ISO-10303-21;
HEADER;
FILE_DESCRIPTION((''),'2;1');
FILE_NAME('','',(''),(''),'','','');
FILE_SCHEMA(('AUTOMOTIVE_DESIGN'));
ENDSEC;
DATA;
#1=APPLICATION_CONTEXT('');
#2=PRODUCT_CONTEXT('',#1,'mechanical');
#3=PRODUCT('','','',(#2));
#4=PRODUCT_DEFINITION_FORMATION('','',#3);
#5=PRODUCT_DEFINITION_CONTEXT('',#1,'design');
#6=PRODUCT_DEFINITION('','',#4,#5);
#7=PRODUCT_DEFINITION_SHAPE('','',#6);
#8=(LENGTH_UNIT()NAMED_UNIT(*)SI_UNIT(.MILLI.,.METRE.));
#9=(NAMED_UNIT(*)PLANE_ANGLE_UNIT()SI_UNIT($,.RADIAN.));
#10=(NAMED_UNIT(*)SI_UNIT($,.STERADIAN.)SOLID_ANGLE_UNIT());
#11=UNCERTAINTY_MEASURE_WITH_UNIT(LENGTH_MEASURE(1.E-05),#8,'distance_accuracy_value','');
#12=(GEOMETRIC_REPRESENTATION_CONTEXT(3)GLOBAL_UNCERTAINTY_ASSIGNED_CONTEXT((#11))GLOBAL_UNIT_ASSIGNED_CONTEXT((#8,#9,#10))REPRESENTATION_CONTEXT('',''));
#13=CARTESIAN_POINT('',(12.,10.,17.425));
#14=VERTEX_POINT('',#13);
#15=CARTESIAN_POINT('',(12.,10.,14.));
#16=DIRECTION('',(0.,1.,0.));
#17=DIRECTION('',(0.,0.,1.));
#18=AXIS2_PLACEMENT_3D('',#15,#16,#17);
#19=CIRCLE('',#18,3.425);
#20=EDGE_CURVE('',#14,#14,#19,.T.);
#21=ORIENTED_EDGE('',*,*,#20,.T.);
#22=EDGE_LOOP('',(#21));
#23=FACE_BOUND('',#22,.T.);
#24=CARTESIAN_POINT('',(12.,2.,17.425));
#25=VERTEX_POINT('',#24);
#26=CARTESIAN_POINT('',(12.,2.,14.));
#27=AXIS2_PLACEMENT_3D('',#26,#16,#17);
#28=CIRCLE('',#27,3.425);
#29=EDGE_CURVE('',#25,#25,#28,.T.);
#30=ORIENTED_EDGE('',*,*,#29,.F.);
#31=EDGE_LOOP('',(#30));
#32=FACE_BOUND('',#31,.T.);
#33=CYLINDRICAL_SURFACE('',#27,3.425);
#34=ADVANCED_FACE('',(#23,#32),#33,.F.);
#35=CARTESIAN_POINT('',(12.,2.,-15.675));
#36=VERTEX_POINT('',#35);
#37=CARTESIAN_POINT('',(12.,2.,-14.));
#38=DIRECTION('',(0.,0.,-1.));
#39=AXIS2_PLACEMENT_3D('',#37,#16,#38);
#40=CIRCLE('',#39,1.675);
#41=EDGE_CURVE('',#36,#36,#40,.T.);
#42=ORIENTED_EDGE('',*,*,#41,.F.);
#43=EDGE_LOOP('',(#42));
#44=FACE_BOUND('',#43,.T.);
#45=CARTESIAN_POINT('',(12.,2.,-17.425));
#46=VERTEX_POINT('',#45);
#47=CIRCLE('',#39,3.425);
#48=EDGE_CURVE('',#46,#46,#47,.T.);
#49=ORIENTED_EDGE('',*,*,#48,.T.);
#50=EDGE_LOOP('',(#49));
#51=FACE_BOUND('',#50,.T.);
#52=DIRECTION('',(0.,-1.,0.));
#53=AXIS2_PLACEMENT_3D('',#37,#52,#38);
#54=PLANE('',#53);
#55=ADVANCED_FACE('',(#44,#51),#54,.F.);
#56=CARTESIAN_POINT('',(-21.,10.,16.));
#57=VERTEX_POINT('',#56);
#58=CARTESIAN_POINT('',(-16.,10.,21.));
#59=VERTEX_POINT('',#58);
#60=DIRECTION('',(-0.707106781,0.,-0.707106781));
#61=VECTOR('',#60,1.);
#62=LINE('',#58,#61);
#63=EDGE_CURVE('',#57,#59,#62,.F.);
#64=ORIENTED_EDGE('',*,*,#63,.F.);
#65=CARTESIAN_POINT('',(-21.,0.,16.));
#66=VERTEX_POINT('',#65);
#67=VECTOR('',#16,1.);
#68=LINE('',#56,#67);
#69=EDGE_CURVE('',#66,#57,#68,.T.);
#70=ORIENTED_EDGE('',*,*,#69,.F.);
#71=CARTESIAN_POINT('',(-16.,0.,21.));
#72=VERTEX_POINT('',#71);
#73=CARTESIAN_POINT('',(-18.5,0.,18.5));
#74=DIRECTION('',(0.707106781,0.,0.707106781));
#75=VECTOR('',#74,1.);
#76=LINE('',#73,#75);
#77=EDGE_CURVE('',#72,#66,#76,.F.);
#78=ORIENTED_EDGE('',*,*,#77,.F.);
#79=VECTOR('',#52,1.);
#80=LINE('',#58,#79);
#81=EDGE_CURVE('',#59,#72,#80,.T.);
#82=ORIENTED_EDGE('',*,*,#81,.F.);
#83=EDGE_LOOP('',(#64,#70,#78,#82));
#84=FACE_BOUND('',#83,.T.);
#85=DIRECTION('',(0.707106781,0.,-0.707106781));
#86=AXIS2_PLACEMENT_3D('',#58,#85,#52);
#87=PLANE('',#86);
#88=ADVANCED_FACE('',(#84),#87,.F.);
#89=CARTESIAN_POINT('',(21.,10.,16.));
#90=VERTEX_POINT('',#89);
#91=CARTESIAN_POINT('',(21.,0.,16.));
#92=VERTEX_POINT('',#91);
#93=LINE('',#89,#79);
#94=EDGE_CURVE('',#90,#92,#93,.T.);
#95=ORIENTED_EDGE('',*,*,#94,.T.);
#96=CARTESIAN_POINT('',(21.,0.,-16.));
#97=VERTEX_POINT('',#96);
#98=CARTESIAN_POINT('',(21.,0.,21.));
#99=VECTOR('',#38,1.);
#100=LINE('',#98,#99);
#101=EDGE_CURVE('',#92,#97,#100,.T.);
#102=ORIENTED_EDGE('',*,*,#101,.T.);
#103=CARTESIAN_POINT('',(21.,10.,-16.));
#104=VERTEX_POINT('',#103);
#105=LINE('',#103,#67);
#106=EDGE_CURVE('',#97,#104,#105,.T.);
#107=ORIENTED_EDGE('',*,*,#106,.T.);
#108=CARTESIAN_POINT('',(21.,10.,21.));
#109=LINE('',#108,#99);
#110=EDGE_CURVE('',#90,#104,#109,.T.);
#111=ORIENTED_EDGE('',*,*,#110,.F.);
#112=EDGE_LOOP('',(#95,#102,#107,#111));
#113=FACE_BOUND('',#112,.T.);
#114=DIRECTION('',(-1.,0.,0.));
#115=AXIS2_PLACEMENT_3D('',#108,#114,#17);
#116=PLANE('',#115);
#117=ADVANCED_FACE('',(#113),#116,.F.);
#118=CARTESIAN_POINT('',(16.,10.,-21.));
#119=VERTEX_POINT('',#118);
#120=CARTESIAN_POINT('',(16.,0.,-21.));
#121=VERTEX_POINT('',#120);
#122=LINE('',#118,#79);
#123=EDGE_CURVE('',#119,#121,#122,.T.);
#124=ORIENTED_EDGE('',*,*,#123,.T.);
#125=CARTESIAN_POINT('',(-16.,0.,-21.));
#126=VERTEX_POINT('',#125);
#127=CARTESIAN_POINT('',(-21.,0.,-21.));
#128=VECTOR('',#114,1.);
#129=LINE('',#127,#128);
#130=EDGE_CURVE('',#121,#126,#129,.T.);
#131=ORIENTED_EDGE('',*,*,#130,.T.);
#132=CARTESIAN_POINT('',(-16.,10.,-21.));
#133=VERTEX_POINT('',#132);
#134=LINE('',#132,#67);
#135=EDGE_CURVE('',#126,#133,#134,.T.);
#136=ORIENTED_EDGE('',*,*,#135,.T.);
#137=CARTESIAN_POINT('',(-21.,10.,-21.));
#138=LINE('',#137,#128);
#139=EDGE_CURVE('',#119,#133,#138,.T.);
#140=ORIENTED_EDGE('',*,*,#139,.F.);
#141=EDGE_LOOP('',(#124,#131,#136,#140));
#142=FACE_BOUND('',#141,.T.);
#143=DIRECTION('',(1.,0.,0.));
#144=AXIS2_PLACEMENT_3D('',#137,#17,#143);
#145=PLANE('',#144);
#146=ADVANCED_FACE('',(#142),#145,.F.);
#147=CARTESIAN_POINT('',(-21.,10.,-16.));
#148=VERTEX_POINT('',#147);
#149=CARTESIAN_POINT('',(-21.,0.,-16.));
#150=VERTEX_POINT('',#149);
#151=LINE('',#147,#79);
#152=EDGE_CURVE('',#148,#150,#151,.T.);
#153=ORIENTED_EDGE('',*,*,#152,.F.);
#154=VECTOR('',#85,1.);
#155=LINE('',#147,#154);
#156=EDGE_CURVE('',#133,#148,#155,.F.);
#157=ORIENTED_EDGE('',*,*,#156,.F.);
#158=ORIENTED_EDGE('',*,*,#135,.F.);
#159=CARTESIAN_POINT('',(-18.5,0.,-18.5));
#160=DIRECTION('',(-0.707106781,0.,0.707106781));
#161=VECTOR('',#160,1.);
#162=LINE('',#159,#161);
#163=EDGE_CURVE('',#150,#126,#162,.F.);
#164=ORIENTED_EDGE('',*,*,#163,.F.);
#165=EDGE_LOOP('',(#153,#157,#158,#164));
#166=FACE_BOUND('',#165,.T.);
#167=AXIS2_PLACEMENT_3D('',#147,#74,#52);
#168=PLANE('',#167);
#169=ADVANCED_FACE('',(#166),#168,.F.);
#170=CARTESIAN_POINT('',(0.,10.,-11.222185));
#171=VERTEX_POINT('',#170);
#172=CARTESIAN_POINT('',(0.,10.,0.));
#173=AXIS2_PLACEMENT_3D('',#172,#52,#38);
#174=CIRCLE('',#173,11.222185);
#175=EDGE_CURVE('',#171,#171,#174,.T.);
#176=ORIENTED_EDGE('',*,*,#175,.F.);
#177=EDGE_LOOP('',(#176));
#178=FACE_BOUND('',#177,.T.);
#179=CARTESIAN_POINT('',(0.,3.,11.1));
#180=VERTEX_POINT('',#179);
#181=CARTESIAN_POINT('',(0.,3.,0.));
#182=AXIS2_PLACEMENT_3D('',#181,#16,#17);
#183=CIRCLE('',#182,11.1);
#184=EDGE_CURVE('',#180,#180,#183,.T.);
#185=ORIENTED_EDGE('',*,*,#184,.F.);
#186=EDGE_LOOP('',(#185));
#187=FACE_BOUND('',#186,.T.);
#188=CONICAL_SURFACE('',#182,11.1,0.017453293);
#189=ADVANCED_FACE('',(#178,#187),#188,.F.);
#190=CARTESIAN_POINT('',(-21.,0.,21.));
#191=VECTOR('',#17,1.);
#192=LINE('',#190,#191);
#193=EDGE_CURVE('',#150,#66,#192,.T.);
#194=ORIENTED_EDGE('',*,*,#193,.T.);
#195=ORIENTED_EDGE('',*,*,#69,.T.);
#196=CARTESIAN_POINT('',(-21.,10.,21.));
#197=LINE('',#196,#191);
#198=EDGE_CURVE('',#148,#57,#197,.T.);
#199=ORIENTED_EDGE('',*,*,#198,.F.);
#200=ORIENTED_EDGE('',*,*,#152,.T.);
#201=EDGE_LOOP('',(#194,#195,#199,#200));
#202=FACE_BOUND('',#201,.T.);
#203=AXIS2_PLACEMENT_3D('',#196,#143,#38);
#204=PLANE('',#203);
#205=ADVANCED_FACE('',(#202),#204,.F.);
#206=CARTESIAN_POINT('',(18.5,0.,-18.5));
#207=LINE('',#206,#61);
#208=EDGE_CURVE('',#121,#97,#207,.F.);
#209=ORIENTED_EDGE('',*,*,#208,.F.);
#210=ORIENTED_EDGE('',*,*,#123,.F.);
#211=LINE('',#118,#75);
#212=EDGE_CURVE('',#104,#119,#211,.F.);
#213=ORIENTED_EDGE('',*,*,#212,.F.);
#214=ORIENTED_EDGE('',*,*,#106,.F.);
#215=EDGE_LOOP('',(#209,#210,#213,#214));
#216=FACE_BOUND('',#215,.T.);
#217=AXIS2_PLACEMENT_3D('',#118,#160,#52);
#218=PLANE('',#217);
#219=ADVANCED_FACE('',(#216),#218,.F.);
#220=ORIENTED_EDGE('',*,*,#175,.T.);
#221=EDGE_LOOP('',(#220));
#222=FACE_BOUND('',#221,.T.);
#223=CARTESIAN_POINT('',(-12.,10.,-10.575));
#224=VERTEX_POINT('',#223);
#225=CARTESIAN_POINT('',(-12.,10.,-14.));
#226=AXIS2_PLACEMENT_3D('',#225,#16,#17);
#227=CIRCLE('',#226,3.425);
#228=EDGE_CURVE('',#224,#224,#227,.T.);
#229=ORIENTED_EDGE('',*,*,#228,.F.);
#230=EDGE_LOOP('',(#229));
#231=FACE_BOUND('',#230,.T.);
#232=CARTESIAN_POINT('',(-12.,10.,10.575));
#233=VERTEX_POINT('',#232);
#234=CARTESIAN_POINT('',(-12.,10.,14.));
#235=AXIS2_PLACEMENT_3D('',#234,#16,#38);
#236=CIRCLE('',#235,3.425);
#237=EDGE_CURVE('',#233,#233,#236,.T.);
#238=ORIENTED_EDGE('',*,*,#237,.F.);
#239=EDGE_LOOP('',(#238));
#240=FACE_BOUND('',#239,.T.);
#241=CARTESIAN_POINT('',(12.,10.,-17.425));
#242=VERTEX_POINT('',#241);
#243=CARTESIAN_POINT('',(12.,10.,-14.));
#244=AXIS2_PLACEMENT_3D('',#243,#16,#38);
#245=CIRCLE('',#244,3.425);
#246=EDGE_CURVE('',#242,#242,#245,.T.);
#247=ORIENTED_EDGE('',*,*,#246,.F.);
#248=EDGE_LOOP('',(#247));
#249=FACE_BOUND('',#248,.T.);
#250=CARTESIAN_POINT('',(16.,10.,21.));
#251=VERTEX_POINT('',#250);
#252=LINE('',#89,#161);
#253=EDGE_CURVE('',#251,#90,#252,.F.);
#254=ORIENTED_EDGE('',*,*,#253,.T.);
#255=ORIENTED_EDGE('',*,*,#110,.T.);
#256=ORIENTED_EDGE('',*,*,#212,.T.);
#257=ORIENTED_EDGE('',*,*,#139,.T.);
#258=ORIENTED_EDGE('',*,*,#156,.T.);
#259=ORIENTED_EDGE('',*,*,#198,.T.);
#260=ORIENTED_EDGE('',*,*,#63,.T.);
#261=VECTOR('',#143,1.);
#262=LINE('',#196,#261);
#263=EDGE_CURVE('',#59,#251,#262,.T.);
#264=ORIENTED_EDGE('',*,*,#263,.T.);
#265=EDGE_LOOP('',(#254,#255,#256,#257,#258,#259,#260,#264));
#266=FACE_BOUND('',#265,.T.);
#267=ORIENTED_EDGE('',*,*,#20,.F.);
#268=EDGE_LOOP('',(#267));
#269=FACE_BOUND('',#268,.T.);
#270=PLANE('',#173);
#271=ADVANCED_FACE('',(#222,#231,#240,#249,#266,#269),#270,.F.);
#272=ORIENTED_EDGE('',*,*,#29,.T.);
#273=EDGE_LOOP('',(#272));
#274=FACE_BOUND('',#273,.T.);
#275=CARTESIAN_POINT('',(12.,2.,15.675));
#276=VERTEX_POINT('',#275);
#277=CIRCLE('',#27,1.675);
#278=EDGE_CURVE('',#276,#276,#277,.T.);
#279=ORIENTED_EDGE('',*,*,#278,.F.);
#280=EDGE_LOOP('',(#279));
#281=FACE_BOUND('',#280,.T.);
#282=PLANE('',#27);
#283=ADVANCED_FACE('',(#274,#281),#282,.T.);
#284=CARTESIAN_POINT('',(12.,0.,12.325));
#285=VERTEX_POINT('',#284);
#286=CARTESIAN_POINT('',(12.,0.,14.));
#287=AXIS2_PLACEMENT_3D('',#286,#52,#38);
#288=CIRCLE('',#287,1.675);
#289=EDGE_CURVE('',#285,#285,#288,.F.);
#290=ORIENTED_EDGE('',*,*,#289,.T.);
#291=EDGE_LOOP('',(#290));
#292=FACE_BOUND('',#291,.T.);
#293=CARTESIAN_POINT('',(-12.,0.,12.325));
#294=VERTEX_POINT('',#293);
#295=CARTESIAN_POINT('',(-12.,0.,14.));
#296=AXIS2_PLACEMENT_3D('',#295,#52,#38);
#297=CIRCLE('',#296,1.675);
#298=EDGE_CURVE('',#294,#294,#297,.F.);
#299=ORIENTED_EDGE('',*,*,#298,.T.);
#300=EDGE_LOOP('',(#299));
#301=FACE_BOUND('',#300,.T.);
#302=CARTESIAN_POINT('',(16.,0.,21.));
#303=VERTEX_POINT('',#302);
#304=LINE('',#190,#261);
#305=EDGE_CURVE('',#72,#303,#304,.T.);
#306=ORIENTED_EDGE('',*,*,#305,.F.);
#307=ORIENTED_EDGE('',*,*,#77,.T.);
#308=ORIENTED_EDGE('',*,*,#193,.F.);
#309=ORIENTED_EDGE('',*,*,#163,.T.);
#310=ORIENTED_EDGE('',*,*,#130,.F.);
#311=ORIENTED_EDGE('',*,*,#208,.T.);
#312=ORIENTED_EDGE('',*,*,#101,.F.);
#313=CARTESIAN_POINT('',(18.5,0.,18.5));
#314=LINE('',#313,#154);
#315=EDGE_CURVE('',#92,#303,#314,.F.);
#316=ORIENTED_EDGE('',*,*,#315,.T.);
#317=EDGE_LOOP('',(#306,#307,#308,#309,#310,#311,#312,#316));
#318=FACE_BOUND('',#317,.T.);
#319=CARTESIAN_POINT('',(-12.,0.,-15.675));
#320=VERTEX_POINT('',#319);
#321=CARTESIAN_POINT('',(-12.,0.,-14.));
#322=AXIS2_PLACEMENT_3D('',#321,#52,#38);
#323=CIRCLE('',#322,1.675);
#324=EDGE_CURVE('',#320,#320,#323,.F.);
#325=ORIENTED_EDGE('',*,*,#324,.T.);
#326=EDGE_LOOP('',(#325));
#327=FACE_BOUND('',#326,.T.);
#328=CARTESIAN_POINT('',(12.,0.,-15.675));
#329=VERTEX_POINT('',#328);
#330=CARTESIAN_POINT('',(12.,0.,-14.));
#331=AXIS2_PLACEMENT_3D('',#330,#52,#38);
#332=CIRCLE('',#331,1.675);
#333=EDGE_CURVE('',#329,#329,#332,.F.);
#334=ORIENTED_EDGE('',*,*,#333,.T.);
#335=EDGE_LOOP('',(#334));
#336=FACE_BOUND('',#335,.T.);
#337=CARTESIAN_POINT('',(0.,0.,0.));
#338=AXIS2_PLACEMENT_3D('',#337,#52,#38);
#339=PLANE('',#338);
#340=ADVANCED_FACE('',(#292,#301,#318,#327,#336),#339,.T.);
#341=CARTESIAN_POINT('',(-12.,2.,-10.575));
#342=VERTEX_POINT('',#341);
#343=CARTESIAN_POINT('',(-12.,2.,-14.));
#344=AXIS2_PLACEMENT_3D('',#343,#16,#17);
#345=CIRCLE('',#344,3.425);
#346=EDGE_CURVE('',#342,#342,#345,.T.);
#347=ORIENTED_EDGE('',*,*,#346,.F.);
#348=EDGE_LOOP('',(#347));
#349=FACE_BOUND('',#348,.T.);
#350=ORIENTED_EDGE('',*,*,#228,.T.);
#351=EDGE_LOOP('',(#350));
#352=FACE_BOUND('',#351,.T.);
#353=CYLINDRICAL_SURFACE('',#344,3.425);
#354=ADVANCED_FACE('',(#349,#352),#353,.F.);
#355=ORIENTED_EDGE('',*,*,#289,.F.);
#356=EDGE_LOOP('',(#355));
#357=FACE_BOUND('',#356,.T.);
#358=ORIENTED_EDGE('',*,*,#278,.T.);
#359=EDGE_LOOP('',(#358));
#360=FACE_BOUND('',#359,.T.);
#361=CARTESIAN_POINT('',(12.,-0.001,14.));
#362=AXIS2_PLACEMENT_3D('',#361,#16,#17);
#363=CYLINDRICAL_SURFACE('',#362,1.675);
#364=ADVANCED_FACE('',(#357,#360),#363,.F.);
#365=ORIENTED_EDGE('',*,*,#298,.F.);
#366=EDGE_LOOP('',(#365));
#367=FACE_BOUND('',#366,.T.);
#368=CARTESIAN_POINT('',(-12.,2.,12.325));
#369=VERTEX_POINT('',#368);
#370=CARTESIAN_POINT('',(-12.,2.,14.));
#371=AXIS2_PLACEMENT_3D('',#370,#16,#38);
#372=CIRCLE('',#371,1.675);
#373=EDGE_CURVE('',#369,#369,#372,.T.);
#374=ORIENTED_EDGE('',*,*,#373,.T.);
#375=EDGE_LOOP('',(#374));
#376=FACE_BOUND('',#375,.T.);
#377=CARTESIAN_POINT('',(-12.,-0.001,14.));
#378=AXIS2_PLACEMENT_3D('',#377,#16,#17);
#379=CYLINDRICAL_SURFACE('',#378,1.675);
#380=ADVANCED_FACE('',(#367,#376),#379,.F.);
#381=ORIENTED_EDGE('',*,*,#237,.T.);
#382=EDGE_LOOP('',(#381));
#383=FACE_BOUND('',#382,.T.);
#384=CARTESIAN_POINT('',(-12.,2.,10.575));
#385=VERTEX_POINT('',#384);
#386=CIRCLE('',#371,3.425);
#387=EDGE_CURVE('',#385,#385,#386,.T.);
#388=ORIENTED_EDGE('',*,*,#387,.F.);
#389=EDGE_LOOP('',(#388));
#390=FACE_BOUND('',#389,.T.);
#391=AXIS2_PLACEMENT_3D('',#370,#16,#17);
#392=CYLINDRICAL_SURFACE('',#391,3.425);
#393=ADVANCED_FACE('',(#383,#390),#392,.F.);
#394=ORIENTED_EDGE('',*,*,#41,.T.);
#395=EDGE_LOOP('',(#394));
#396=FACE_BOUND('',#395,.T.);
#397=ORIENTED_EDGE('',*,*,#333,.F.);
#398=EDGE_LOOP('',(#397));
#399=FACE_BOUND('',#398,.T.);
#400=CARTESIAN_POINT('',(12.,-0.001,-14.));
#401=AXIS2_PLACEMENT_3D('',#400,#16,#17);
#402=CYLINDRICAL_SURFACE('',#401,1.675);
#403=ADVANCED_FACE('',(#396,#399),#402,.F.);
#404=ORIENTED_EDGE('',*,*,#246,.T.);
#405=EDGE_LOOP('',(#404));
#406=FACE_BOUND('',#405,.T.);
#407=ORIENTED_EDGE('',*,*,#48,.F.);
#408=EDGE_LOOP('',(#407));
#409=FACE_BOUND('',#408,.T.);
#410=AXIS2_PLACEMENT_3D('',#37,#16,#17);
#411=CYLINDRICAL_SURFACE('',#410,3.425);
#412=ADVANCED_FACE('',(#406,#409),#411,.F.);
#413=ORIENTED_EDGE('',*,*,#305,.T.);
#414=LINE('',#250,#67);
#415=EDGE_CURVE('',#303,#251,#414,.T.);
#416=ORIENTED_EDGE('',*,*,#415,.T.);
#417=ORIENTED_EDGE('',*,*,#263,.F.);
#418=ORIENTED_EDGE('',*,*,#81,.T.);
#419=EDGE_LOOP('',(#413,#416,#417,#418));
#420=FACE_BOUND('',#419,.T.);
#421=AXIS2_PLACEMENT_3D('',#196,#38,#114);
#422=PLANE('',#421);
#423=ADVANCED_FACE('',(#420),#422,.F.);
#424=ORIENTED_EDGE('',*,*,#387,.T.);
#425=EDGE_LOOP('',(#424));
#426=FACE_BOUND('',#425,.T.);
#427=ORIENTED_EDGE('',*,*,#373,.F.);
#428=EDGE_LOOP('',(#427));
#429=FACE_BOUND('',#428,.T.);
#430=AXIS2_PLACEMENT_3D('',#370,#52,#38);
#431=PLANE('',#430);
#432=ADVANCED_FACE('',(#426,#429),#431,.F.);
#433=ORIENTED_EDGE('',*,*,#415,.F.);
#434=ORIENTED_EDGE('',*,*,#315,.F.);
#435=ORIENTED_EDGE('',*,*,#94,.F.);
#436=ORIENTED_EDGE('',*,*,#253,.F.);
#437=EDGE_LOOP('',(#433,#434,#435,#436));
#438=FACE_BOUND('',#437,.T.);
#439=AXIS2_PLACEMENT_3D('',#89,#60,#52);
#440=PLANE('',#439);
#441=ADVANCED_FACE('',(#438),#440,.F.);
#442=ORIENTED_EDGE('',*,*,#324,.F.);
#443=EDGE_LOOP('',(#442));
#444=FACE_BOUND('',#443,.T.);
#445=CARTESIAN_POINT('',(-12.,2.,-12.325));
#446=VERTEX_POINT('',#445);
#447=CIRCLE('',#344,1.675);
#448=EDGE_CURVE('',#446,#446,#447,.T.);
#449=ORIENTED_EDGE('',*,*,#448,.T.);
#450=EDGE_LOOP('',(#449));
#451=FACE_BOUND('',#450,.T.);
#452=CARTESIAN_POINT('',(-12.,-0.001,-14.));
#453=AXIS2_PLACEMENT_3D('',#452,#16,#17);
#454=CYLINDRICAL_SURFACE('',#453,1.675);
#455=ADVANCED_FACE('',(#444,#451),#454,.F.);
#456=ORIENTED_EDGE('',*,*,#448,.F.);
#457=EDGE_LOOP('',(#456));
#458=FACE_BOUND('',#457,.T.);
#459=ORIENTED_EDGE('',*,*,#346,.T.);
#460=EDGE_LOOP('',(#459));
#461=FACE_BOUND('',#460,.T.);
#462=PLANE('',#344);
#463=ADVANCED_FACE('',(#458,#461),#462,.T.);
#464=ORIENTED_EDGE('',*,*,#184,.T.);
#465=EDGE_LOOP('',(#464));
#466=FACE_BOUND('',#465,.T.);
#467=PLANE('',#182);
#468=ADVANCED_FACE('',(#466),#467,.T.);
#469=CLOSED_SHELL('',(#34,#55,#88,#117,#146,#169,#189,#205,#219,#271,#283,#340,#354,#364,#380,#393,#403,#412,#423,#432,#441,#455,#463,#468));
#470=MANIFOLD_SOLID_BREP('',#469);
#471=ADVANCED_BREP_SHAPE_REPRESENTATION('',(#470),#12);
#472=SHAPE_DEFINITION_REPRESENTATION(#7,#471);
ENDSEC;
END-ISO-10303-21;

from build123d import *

# Parameters (mm, degrees)
SKETCH1_W           = 42
SKETCH1_H           = 42
BOSS_EXTRUDE1_DEPTH = 10
SKETCH2_R           = 11.1
CUT_EXTRUDE1_DEPTH  = 7
CHAMFER1_SIZE       = 0.122185454
CHAMFER1_SIZE_2     = 7
SKETCH3_R           = 3.425
CUT_EXTRUDE2_DEPTH  = 8
CHAMFER2_SIZE       = 5
CUT_EXTRUDE3_REACH  = 32.757
SKETCH4_R           = 1.675


with BuildPart() as part:
    # Sketch1 → Boss-Extrude1 (new body)
    with BuildSketch(Plane(origin=(0, 0, 0), x_dir=(1, 0, 0), z_dir=(0, 1, 0))):
        Rectangle(SKETCH1_W, SKETCH1_H)
    extrude(amount=BOSS_EXTRUDE1_DEPTH)

    # Sketch2 → Cut-Extrude1 (cut)
    with BuildSketch(Plane(origin=(0, 10, 0), x_dir=(1, 0, 0), z_dir=(0, 1, 0))):
        with Locations(Location((0, 0, 0), (0, 0, 270))):
            Circle(SKETCH2_R)
    extrude(amount=-CUT_EXTRUDE1_DEPTH, mode=Mode.SUBTRACT)

    # Chamfer1
    # the kernel refuses this chamfer: 7, 0.122185454 mm, written as the material it takes off along each edge
    with BuildSketch(Plane(origin=(0, 10, 0), x_dir=(0, 0, 1), z_dir=(-1, 0, 0))) as chamfer1_piece_1_section:
        Polygon((11.1 + CHAMFER1_SIZE * 1.00000000407, 0), (11.1, -CHAMFER1_SIZE_2), (11.1, 0), align=None)
    chamfer1_piece_1 = revolve(axis=Axis((0, 10, 0), (0, 1, 0)), mode=Mode.PRIVATE)
    chamfer1_piece_1 = split(chamfer1_piece_1, bisect_by=Plane(origin=(0, 3, -11.117232441), z_dir=(0, 1, 0)), keep=Keep.TOP, mode=Mode.PRIVATE)
    add(chamfer1_piece_1, mode=Mode.SUBTRACT)

    # Sketch3 → Cut-Extrude2 (cut)
    with BuildSketch(Plane(origin=(0, 10, 0), x_dir=(1, 0, 0), z_dir=(0, 1, 0))):
        with Locations(Location((-12, 14, 0), (0, 0, 270))):
            Circle(SKETCH3_R)
        with Locations(Location((-12, -14, 0), (0, 0, 90))):
            Circle(SKETCH3_R)
        with Locations(Location((12, -14, 0), (0, 0, 270))):
            Circle(SKETCH3_R)
        with Locations(Location((12, 14, 0), (0, 0, 90))):
            Circle(SKETCH3_R)
    extrude(amount=-CUT_EXTRUDE2_DEPTH, mode=Mode.SUBTRACT)

    # Chamfer2
    chamfer2_edges = [part.edges().sort_by_distance(p)[0] for p in [
        (21, 5, 21),
        (-21, 5, 21),
        (-21, 5, -21),
        (21, 5, -21),
    ]]
    chamfer(chamfer2_edges, length=CHAMFER2_SIZE)

    # Sketch4 → Cut-Extrude3 (cut, up to next)
    with BuildSketch(Plane(origin=(0, 2, 0), x_dir=(1, 0, 0), z_dir=(0, 1, 0)), mode=Mode.PRIVATE) as cut_extrude3_sk1:
        with Locations(Location((-12, 14, 0), (0, 0, 270))):
            Circle(SKETCH4_R)
    cut_extrude3_tool1 = extrude(cut_extrude3_sk1.sketch, amount=-CUT_EXTRUDE3_REACH, mode=Mode.PRIVATE) & part.part
    # Sketch4 → Cut-Extrude3 (cut, up to next)
    with BuildSketch(Plane(origin=(0, 2, 0), x_dir=(1, 0, 0), z_dir=(0, 1, 0)), mode=Mode.PRIVATE) as cut_extrude3_sk2:
        with Locations(Location((12, 14, 0), (0, 0, 90))):
            Circle(SKETCH4_R)
    cut_extrude3_tool2 = extrude(cut_extrude3_sk2.sketch, amount=-CUT_EXTRUDE3_REACH, mode=Mode.PRIVATE) & part.part
    # Sketch4 → Cut-Extrude3 (cut, up to next)
    with BuildSketch(Plane(origin=(0, 2, 0), x_dir=(1, 0, 0), z_dir=(0, 1, 0)), mode=Mode.PRIVATE) as cut_extrude3_sk3:
        with Locations(Location((12, -14, 0), (0, 0, 270))):
            Circle(SKETCH4_R)
    cut_extrude3_tool3 = extrude(cut_extrude3_sk3.sketch, amount=-CUT_EXTRUDE3_REACH, mode=Mode.PRIVATE) & part.part
    # Sketch4 → Cut-Extrude3 (cut, up to next)
    with BuildSketch(Plane(origin=(0, 2, 0), x_dir=(1, 0, 0), z_dir=(0, 1, 0)), mode=Mode.PRIVATE) as cut_extrude3_sk4:
        with Locations(Location((-12, -14, 0), (0, 0, 90))):
            Circle(SKETCH4_R)
    cut_extrude3_tool4 = extrude(cut_extrude3_sk4.sketch, amount=-CUT_EXTRUDE3_REACH, mode=Mode.PRIVATE) & part.part
    add(cut_extrude3_tool1.solids().sort_by_distance((-12, 2, -14))[0], mode=Mode.SUBTRACT)
    add(cut_extrude3_tool2.solids().sort_by_distance((12, 2, -14))[0], mode=Mode.SUBTRACT)
    add(cut_extrude3_tool3.solids().sort_by_distance((12, 2, 14))[0], mode=Mode.SUBTRACT)
    add(cut_extrude3_tool4.solids().sort_by_distance((-12, 2, 14))[0], mode=Mode.SUBTRACT)


solid = part.part
